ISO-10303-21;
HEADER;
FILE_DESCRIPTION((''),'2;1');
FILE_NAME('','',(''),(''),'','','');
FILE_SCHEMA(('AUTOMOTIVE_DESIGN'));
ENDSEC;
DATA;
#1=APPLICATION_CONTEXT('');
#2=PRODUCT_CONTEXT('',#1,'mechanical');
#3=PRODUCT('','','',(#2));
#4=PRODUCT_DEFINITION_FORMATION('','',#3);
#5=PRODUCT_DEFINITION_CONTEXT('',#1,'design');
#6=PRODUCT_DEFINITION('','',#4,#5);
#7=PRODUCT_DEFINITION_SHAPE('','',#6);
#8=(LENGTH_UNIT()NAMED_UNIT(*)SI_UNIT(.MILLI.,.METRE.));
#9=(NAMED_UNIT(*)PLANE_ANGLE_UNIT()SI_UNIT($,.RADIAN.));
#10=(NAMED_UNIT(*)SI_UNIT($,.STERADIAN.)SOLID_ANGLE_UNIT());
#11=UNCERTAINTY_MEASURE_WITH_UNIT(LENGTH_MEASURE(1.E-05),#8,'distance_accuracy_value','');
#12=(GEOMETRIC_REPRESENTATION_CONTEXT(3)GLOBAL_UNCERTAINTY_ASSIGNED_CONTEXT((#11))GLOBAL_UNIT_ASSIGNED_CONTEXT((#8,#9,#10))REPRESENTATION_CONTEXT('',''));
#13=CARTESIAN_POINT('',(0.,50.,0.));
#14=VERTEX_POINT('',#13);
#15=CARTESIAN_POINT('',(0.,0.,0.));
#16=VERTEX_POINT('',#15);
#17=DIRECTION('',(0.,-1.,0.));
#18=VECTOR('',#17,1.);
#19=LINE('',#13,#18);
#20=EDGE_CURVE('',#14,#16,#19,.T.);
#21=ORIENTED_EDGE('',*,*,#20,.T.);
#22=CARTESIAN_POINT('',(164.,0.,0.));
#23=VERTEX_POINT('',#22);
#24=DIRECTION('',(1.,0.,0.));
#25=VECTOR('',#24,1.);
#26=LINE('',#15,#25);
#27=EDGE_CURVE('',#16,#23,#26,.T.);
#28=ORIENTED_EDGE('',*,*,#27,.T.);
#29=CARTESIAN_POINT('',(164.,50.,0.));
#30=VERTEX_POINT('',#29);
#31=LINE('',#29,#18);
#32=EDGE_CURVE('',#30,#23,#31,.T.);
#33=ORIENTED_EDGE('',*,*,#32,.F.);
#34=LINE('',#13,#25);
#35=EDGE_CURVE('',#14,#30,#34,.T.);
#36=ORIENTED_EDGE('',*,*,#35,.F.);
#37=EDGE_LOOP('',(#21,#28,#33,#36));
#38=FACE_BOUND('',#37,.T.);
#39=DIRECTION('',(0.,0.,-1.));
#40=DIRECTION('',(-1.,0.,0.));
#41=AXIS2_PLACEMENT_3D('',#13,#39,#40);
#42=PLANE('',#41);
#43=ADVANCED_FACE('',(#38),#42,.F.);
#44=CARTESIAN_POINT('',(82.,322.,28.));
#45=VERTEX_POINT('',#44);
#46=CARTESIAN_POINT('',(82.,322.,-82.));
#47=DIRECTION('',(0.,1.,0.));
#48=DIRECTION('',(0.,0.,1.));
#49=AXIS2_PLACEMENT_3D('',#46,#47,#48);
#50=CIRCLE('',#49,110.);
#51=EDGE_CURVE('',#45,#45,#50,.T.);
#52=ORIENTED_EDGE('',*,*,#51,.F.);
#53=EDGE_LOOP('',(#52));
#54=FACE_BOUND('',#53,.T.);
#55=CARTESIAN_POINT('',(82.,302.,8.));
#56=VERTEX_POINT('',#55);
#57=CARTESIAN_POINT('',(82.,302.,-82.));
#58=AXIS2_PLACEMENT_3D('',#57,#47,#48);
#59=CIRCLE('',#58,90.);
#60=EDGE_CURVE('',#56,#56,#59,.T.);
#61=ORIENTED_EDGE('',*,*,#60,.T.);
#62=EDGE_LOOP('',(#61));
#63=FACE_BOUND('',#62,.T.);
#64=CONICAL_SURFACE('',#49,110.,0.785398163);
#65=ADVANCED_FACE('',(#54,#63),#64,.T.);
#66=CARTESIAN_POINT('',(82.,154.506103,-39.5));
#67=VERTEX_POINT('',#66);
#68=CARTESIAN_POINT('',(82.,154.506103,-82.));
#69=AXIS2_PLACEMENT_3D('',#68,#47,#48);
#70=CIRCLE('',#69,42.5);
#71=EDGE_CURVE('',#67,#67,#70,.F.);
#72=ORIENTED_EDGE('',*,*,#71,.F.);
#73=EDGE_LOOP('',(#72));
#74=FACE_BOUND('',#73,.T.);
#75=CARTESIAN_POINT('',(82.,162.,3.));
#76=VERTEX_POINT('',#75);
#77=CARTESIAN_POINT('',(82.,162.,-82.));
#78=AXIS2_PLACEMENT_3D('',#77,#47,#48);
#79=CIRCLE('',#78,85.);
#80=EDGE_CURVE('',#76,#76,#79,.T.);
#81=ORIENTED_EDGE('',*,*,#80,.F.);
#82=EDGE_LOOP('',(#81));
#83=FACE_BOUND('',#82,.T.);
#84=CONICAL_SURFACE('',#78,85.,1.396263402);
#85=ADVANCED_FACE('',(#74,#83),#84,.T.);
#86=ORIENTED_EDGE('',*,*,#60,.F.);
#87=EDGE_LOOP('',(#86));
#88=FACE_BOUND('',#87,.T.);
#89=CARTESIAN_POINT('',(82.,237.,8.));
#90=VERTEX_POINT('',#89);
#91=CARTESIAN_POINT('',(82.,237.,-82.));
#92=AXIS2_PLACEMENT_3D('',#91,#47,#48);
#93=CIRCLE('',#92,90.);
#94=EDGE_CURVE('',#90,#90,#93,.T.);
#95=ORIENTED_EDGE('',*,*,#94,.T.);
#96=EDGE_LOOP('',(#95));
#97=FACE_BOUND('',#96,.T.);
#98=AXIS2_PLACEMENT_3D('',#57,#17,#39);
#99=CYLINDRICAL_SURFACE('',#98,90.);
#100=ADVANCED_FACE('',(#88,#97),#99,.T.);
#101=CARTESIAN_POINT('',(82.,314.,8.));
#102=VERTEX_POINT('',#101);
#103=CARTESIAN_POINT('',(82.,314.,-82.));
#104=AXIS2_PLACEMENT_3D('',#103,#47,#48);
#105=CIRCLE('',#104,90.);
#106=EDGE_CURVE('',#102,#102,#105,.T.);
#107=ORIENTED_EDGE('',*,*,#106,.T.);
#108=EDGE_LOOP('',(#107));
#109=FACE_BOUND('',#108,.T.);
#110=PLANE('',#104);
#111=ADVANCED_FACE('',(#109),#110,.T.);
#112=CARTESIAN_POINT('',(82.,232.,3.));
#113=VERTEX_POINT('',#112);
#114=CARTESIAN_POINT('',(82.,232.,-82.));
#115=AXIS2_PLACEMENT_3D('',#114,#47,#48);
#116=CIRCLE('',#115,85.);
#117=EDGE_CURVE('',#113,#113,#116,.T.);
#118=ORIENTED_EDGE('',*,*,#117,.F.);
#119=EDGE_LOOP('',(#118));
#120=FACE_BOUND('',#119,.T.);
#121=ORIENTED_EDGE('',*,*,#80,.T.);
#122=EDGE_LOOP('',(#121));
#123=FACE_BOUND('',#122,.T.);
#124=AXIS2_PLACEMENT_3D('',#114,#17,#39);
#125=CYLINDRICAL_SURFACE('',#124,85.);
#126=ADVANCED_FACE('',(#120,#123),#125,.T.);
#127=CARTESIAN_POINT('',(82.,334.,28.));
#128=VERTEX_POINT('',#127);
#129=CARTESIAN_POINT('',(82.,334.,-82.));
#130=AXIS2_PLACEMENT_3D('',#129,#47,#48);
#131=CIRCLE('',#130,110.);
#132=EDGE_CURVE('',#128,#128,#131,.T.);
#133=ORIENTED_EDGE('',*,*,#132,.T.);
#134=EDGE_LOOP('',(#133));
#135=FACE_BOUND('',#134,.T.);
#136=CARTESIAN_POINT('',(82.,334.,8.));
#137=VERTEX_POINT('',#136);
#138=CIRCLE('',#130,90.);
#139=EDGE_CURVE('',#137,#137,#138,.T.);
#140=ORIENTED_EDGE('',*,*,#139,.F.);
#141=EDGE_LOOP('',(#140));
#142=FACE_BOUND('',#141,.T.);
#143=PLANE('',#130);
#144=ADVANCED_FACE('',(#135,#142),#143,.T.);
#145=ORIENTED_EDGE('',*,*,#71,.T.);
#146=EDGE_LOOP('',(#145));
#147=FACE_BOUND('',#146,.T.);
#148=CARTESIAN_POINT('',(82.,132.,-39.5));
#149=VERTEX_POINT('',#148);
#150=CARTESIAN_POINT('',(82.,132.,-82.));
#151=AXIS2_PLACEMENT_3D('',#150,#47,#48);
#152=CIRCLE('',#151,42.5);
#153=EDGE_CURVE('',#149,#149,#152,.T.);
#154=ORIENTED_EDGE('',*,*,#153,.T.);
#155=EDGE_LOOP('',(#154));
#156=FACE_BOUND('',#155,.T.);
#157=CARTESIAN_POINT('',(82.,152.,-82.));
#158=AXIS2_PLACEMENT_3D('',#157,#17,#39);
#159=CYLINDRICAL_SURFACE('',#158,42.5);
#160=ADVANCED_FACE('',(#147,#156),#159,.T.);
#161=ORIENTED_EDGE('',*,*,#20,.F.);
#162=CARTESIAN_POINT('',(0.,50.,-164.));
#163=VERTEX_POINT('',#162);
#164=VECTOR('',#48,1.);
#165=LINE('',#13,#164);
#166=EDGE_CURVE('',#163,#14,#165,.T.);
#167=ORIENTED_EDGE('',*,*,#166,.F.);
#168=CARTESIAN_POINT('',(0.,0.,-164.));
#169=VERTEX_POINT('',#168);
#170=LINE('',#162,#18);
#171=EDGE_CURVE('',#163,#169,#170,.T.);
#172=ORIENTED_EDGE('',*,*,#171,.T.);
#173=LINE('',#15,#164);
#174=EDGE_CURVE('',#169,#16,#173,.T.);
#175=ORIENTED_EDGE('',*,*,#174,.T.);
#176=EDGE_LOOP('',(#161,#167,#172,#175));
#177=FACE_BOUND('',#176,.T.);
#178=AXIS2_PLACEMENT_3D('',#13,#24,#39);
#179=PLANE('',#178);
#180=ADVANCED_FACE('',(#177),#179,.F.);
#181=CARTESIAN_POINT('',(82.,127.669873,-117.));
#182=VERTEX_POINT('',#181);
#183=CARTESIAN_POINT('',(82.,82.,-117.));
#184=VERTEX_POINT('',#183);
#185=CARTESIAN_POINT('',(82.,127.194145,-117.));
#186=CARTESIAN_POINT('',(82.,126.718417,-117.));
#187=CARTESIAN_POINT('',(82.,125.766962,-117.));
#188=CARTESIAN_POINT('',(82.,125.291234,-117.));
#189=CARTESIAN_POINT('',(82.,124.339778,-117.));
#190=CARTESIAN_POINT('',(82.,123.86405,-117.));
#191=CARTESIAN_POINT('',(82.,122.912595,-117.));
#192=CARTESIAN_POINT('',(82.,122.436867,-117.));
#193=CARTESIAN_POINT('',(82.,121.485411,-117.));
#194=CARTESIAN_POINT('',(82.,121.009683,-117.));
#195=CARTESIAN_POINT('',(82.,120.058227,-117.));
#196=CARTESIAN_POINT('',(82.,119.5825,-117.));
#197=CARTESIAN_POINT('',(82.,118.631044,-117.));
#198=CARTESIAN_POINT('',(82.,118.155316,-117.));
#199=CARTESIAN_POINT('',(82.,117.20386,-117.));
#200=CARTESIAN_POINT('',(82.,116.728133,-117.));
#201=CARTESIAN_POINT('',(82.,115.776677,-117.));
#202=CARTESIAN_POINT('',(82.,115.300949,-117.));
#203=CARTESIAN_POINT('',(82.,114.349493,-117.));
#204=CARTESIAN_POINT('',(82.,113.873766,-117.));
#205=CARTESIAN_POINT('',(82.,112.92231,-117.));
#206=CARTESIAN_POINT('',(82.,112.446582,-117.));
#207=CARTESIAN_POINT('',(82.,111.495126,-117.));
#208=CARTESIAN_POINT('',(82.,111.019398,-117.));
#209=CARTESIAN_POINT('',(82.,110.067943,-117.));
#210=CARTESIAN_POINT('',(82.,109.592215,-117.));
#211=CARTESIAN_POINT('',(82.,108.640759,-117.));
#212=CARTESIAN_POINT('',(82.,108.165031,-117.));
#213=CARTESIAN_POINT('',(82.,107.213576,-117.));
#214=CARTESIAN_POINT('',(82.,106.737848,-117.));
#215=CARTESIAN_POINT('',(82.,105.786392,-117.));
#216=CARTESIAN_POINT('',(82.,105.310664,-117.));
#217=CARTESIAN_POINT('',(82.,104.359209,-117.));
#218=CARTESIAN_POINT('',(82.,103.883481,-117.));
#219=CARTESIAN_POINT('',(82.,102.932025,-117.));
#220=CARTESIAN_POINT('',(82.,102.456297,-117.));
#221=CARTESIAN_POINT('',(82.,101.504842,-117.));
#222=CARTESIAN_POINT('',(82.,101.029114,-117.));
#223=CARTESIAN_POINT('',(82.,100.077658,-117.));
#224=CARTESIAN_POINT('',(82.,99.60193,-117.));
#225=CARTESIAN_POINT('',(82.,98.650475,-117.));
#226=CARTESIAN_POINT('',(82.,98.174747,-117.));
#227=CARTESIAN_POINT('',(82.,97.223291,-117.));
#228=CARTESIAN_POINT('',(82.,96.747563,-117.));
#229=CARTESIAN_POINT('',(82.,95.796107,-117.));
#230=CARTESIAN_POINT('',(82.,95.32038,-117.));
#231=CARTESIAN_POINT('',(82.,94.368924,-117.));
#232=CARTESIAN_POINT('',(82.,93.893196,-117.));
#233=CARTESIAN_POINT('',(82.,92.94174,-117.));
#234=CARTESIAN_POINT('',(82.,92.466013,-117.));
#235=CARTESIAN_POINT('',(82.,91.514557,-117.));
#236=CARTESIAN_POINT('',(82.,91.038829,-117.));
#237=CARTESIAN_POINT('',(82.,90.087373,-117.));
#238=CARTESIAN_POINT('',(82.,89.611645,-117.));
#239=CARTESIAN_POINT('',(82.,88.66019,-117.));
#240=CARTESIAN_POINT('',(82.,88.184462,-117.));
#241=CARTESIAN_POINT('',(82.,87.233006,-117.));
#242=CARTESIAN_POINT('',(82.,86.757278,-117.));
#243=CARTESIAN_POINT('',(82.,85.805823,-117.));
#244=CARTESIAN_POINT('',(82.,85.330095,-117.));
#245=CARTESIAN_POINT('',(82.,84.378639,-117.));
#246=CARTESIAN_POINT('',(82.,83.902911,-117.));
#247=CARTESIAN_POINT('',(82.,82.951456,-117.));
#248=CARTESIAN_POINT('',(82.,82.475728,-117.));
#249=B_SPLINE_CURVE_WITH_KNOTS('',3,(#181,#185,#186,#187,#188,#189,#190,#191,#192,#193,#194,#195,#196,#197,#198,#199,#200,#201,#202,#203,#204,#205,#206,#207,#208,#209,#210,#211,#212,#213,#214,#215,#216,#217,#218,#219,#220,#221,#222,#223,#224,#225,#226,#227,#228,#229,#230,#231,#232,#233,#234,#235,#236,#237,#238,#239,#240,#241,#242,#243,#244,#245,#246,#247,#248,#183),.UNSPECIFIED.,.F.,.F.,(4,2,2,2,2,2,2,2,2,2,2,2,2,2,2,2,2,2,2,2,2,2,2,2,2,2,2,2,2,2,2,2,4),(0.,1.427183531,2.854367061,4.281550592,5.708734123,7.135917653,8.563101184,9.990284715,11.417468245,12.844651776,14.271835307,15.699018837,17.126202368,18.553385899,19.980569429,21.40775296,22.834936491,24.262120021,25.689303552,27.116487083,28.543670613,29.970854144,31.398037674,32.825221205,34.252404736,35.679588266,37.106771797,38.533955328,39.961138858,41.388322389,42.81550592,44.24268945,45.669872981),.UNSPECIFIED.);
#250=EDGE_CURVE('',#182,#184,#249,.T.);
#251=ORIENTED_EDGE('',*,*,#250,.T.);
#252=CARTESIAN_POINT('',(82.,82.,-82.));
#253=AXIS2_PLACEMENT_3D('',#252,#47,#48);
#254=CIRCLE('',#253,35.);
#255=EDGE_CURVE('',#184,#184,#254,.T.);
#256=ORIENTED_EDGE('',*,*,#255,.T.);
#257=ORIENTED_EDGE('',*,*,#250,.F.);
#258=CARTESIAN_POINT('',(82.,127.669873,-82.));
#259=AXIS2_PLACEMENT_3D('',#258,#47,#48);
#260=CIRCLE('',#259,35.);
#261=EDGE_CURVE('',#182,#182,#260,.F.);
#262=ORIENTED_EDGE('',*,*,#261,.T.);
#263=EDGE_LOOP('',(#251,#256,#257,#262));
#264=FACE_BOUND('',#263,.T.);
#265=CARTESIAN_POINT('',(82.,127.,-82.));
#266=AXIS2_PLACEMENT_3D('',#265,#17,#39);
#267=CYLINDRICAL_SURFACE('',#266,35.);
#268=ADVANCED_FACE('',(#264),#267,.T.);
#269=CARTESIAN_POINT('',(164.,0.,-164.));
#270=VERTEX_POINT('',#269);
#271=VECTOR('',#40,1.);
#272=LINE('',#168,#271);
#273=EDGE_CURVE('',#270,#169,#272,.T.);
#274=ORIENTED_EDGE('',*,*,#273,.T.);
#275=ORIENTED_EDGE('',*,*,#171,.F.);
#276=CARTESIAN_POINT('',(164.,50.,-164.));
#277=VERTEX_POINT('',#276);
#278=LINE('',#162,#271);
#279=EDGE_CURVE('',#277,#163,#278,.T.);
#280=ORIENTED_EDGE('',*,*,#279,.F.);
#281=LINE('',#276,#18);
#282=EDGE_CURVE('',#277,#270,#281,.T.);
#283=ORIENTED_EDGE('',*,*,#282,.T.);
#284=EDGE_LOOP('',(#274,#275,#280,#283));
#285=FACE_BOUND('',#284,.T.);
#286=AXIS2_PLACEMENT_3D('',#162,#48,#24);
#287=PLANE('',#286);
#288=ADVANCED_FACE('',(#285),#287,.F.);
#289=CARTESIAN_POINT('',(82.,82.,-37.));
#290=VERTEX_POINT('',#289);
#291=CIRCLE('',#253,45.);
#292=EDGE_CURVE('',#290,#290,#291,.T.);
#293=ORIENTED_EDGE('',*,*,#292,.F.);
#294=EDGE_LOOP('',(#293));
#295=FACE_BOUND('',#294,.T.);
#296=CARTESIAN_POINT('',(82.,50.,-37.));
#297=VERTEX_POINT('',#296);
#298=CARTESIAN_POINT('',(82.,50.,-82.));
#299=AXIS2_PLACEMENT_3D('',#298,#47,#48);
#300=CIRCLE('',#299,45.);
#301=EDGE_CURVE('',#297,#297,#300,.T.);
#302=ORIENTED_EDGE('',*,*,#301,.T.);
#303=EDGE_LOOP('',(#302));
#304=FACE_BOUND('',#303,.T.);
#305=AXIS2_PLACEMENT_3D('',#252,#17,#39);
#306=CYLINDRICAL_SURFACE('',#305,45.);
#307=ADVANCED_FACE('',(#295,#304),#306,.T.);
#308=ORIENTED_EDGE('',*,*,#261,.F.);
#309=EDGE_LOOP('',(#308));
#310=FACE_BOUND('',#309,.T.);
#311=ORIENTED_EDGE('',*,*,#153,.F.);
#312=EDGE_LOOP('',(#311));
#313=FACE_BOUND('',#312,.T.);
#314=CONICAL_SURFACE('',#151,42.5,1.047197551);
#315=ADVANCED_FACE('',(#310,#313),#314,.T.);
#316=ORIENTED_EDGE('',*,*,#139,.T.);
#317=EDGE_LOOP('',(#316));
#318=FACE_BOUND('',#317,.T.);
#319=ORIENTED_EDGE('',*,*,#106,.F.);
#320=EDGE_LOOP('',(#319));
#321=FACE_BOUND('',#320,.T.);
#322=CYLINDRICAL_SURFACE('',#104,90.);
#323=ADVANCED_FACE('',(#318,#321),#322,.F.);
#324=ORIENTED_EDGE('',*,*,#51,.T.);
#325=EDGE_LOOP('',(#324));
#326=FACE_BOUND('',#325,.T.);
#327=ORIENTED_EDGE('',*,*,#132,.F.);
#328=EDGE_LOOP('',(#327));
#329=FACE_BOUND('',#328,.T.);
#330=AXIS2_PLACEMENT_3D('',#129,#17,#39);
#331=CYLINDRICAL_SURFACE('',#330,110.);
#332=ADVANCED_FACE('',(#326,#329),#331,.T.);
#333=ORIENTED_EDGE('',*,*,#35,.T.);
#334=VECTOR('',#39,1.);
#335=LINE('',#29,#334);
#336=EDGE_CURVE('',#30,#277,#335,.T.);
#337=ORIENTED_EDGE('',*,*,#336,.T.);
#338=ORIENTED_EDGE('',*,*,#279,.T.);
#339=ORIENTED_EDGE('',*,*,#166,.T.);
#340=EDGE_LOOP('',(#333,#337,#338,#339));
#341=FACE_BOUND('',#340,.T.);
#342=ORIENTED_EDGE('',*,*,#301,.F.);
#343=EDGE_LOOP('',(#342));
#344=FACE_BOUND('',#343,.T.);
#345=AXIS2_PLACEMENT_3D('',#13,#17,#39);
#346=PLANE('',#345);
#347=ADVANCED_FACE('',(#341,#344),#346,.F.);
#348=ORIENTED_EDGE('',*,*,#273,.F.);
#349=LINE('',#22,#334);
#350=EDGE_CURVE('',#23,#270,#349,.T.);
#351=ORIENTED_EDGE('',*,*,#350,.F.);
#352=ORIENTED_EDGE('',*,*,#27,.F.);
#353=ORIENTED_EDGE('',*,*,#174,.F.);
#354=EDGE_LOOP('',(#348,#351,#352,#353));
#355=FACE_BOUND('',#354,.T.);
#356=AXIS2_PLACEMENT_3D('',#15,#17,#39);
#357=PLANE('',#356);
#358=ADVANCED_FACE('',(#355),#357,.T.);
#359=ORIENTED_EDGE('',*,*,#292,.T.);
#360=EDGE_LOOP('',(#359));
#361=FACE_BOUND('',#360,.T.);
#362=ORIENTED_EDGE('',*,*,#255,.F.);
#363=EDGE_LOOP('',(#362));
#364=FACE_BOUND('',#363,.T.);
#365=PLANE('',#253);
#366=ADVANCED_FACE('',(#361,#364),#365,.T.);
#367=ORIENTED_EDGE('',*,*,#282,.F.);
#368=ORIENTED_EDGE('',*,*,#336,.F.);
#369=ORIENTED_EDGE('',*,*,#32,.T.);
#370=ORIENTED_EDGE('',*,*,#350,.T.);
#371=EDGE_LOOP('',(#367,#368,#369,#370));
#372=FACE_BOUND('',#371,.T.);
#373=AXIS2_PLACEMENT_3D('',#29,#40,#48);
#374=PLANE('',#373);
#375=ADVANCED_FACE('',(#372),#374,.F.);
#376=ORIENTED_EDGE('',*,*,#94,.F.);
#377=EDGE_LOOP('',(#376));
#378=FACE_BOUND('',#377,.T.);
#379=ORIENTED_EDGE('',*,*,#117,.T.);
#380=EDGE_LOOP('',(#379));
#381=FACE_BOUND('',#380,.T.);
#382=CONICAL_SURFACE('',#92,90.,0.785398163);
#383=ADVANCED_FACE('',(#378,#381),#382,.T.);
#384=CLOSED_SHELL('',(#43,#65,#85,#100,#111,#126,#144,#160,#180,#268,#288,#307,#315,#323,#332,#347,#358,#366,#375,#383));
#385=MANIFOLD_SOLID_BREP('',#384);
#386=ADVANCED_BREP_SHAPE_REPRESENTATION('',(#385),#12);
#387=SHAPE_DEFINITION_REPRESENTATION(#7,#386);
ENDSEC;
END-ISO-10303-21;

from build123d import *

# Parameters (mm, degrees)
SKETCH1_W           = 164
SKETCH1_H           = 164
BOSS_EXTRUDE1_DEPTH = 50
SKETCH2_R           = 45
BOSS_EXTRUDE2_DEPTH = 32
SKETCH3_R           = 35
BOSS_EXTRUDE3_DEPTH = 45
SKETCH4_R           = 42.5
BOSS_EXTRUDE4_DEPTH = 25
SKETCH5_R           = 85
BOSS_EXTRUDE5_DEPTH = 80
SKETCH6_R           = 90
BOSS_EXTRUDE6_DEPTH = 70
SKETCH7_R           = 110
BOSS_EXTRUDE7_DEPTH = 32
CHAMFER1_SIZE       = 20
CHAMFER2_SIZE       = 5
CHAMFER3_SIZE       = 10
CHAMFER3_SIZE_2     = 56.712818196
CHAMFER4_SIZE       = 5
CHAMFER4_SIZE_2     = 8.660254038
CUT_EXTRUDE1_START  = -20
SKETCH8_R           = 90
CUT_EXTRUDE1_DEPTH  = 20


# Some blends are built 0.0001 mm under size
with BuildPart() as part:
    # Sketch1 → Boss-Extrude1 (new body)
    with BuildSketch(Plane(origin=(0, 0, 0), x_dir=(1, 0, 0), z_dir=(0, 1, 0))):
        with Locations((82, 82)):
            Rectangle(SKETCH1_W, SKETCH1_H)
    extrude(amount=BOSS_EXTRUDE1_DEPTH)

    # Sketch2 → Boss-Extrude2 (add)
    with BuildSketch(Plane(origin=(0, 50, 0), x_dir=(1, 0, 0), z_dir=(0, 1, 0))):
        with Locations(Location((82, 82, 0), (0, 0, 270))):
            Circle(SKETCH2_R)
    extrude(amount=BOSS_EXTRUDE2_DEPTH)

    # Sketch3 → Boss-Extrude3 (add)
    with BuildSketch(Plane(origin=(0, 82, 0), x_dir=(1, 0, 0), z_dir=(0, 1, 0))):
        with Locations(Location((82, 82, 0), (0, 0, 90))):
            Circle(SKETCH3_R)
    extrude(amount=BOSS_EXTRUDE3_DEPTH)

    # Sketch4 → Boss-Extrude4 (add)
    with BuildSketch(Plane(origin=(0, 127, 0), x_dir=(1, 0, 0), z_dir=(0, 1, 0))):
        with Locations(Location((82, 82, 0), (0, 0, 270))):
            Circle(SKETCH4_R)
    extrude(amount=BOSS_EXTRUDE4_DEPTH)

    # Sketch5 → Boss-Extrude5 (add)
    with BuildSketch(Plane(origin=(0, 152, 0), x_dir=(1, 0, 0), z_dir=(0, 1, 0))):
        with Locations(Location((82, 82, 0), (0, 0, 270))):
            Circle(SKETCH5_R)
    extrude(amount=BOSS_EXTRUDE5_DEPTH)

    # Sketch6 → Boss-Extrude6 (add)
    with BuildSketch(Plane(origin=(0, 232, 0), x_dir=(1, 0, 0), z_dir=(0, 1, 0))):
        with Locations(Location((82, 82, 0), (0, 0, 270))):
            Circle(SKETCH6_R)
    extrude(amount=BOSS_EXTRUDE6_DEPTH)

    # Sketch7 → Boss-Extrude7 (add)
    with BuildSketch(Plane(origin=(0, 302, 0), x_dir=(1, 0, 0), z_dir=(0, 1, 0))):
        with Locations(Location((82, 82, 0), (0, 0, 270))):
            Circle(SKETCH7_R)
    extrude(amount=BOSS_EXTRUDE7_DEPTH)

    # Chamfer1
    chamfer1_edges = [part.edges().sort_by_distance(p)[0] for p in [
        (82, 302, -192),
    ]]
    chamfer(chamfer1_edges, length=CHAMFER1_SIZE - 0.0001)  # a hair under: the kernel refuses the full size

    # Chamfer2
    chamfer2_edges = [part.edges().sort_by_distance(p)[0] for p in [
        (82, 232, -172),
    ]]
    chamfer(chamfer2_edges, length=CHAMFER2_SIZE - 0.0001)  # a hair under: the kernel refuses the full size

    # Chamfer3
    # the kernel refuses this chamfer: 56.712818196, 10 mm, written as the material it takes off along each edge
    with BuildSketch(Plane(origin=(82, 152, -82), x_dir=(0, 0, 1), z_dir=(-1, 0, 0))) as chamfer3_piece_1_section:
        Polygon((85, CHAMFER3_SIZE), (85 - CHAMFER3_SIZE_2, 0), (85, 0), align=None)
    chamfer3_piece_1 = revolve(axis=Axis((82, 152, -82), (0, 1, 0)), mode=Mode.PRIVATE)
    chamfer3_piece_1 = chamfer3_piece_1 - Plane(origin=(82, 157.937254532, -82), x_dir=(0, 0, 1), z_dir=(0, -1, 0)) * Cylinder(42.5, 340, mode=Mode.PRIVATE)
    add(chamfer3_piece_1, mode=Mode.SUBTRACT)

    # Chamfer4
    # the kernel refuses this chamfer: 8.660254038, 5 mm, written as the material it takes off along each edge
    with BuildSketch(Plane(origin=(82, 127, -82), x_dir=(0, 0, 1), z_dir=(-1, 0, 0))) as chamfer4_piece_1_section:
        Polygon((42.5, CHAMFER4_SIZE), (42.5 - CHAMFER4_SIZE_2, 0), (42.5, 0), align=None)
    chamfer4_piece_1 = revolve(axis=Axis((82, 127, -82), (0, 1, 0)), mode=Mode.PRIVATE)
    chamfer4_piece_1 = chamfer4_piece_1 - Plane(origin=(82, 129.764704239, -82), x_dir=(0, 0, -1), z_dir=(0, -1, 0)) * Cylinder(35, 170, mode=Mode.PRIVATE)
    add(chamfer4_piece_1, mode=Mode.SUBTRACT)

    # Sketch8 → Cut-Extrude1 (cut)
    with BuildSketch(Plane(origin=(0, 334, 0), x_dir=(1, 0, 0), z_dir=(0, 1, 0)).offset(CUT_EXTRUDE1_START)):
        with Locations(Location((82, 82, 0), (0, 0, 270))):
            Circle(SKETCH8_R)
    extrude(amount=CUT_EXTRUDE1_DEPTH, mode=Mode.SUBTRACT)


solid = part.part
